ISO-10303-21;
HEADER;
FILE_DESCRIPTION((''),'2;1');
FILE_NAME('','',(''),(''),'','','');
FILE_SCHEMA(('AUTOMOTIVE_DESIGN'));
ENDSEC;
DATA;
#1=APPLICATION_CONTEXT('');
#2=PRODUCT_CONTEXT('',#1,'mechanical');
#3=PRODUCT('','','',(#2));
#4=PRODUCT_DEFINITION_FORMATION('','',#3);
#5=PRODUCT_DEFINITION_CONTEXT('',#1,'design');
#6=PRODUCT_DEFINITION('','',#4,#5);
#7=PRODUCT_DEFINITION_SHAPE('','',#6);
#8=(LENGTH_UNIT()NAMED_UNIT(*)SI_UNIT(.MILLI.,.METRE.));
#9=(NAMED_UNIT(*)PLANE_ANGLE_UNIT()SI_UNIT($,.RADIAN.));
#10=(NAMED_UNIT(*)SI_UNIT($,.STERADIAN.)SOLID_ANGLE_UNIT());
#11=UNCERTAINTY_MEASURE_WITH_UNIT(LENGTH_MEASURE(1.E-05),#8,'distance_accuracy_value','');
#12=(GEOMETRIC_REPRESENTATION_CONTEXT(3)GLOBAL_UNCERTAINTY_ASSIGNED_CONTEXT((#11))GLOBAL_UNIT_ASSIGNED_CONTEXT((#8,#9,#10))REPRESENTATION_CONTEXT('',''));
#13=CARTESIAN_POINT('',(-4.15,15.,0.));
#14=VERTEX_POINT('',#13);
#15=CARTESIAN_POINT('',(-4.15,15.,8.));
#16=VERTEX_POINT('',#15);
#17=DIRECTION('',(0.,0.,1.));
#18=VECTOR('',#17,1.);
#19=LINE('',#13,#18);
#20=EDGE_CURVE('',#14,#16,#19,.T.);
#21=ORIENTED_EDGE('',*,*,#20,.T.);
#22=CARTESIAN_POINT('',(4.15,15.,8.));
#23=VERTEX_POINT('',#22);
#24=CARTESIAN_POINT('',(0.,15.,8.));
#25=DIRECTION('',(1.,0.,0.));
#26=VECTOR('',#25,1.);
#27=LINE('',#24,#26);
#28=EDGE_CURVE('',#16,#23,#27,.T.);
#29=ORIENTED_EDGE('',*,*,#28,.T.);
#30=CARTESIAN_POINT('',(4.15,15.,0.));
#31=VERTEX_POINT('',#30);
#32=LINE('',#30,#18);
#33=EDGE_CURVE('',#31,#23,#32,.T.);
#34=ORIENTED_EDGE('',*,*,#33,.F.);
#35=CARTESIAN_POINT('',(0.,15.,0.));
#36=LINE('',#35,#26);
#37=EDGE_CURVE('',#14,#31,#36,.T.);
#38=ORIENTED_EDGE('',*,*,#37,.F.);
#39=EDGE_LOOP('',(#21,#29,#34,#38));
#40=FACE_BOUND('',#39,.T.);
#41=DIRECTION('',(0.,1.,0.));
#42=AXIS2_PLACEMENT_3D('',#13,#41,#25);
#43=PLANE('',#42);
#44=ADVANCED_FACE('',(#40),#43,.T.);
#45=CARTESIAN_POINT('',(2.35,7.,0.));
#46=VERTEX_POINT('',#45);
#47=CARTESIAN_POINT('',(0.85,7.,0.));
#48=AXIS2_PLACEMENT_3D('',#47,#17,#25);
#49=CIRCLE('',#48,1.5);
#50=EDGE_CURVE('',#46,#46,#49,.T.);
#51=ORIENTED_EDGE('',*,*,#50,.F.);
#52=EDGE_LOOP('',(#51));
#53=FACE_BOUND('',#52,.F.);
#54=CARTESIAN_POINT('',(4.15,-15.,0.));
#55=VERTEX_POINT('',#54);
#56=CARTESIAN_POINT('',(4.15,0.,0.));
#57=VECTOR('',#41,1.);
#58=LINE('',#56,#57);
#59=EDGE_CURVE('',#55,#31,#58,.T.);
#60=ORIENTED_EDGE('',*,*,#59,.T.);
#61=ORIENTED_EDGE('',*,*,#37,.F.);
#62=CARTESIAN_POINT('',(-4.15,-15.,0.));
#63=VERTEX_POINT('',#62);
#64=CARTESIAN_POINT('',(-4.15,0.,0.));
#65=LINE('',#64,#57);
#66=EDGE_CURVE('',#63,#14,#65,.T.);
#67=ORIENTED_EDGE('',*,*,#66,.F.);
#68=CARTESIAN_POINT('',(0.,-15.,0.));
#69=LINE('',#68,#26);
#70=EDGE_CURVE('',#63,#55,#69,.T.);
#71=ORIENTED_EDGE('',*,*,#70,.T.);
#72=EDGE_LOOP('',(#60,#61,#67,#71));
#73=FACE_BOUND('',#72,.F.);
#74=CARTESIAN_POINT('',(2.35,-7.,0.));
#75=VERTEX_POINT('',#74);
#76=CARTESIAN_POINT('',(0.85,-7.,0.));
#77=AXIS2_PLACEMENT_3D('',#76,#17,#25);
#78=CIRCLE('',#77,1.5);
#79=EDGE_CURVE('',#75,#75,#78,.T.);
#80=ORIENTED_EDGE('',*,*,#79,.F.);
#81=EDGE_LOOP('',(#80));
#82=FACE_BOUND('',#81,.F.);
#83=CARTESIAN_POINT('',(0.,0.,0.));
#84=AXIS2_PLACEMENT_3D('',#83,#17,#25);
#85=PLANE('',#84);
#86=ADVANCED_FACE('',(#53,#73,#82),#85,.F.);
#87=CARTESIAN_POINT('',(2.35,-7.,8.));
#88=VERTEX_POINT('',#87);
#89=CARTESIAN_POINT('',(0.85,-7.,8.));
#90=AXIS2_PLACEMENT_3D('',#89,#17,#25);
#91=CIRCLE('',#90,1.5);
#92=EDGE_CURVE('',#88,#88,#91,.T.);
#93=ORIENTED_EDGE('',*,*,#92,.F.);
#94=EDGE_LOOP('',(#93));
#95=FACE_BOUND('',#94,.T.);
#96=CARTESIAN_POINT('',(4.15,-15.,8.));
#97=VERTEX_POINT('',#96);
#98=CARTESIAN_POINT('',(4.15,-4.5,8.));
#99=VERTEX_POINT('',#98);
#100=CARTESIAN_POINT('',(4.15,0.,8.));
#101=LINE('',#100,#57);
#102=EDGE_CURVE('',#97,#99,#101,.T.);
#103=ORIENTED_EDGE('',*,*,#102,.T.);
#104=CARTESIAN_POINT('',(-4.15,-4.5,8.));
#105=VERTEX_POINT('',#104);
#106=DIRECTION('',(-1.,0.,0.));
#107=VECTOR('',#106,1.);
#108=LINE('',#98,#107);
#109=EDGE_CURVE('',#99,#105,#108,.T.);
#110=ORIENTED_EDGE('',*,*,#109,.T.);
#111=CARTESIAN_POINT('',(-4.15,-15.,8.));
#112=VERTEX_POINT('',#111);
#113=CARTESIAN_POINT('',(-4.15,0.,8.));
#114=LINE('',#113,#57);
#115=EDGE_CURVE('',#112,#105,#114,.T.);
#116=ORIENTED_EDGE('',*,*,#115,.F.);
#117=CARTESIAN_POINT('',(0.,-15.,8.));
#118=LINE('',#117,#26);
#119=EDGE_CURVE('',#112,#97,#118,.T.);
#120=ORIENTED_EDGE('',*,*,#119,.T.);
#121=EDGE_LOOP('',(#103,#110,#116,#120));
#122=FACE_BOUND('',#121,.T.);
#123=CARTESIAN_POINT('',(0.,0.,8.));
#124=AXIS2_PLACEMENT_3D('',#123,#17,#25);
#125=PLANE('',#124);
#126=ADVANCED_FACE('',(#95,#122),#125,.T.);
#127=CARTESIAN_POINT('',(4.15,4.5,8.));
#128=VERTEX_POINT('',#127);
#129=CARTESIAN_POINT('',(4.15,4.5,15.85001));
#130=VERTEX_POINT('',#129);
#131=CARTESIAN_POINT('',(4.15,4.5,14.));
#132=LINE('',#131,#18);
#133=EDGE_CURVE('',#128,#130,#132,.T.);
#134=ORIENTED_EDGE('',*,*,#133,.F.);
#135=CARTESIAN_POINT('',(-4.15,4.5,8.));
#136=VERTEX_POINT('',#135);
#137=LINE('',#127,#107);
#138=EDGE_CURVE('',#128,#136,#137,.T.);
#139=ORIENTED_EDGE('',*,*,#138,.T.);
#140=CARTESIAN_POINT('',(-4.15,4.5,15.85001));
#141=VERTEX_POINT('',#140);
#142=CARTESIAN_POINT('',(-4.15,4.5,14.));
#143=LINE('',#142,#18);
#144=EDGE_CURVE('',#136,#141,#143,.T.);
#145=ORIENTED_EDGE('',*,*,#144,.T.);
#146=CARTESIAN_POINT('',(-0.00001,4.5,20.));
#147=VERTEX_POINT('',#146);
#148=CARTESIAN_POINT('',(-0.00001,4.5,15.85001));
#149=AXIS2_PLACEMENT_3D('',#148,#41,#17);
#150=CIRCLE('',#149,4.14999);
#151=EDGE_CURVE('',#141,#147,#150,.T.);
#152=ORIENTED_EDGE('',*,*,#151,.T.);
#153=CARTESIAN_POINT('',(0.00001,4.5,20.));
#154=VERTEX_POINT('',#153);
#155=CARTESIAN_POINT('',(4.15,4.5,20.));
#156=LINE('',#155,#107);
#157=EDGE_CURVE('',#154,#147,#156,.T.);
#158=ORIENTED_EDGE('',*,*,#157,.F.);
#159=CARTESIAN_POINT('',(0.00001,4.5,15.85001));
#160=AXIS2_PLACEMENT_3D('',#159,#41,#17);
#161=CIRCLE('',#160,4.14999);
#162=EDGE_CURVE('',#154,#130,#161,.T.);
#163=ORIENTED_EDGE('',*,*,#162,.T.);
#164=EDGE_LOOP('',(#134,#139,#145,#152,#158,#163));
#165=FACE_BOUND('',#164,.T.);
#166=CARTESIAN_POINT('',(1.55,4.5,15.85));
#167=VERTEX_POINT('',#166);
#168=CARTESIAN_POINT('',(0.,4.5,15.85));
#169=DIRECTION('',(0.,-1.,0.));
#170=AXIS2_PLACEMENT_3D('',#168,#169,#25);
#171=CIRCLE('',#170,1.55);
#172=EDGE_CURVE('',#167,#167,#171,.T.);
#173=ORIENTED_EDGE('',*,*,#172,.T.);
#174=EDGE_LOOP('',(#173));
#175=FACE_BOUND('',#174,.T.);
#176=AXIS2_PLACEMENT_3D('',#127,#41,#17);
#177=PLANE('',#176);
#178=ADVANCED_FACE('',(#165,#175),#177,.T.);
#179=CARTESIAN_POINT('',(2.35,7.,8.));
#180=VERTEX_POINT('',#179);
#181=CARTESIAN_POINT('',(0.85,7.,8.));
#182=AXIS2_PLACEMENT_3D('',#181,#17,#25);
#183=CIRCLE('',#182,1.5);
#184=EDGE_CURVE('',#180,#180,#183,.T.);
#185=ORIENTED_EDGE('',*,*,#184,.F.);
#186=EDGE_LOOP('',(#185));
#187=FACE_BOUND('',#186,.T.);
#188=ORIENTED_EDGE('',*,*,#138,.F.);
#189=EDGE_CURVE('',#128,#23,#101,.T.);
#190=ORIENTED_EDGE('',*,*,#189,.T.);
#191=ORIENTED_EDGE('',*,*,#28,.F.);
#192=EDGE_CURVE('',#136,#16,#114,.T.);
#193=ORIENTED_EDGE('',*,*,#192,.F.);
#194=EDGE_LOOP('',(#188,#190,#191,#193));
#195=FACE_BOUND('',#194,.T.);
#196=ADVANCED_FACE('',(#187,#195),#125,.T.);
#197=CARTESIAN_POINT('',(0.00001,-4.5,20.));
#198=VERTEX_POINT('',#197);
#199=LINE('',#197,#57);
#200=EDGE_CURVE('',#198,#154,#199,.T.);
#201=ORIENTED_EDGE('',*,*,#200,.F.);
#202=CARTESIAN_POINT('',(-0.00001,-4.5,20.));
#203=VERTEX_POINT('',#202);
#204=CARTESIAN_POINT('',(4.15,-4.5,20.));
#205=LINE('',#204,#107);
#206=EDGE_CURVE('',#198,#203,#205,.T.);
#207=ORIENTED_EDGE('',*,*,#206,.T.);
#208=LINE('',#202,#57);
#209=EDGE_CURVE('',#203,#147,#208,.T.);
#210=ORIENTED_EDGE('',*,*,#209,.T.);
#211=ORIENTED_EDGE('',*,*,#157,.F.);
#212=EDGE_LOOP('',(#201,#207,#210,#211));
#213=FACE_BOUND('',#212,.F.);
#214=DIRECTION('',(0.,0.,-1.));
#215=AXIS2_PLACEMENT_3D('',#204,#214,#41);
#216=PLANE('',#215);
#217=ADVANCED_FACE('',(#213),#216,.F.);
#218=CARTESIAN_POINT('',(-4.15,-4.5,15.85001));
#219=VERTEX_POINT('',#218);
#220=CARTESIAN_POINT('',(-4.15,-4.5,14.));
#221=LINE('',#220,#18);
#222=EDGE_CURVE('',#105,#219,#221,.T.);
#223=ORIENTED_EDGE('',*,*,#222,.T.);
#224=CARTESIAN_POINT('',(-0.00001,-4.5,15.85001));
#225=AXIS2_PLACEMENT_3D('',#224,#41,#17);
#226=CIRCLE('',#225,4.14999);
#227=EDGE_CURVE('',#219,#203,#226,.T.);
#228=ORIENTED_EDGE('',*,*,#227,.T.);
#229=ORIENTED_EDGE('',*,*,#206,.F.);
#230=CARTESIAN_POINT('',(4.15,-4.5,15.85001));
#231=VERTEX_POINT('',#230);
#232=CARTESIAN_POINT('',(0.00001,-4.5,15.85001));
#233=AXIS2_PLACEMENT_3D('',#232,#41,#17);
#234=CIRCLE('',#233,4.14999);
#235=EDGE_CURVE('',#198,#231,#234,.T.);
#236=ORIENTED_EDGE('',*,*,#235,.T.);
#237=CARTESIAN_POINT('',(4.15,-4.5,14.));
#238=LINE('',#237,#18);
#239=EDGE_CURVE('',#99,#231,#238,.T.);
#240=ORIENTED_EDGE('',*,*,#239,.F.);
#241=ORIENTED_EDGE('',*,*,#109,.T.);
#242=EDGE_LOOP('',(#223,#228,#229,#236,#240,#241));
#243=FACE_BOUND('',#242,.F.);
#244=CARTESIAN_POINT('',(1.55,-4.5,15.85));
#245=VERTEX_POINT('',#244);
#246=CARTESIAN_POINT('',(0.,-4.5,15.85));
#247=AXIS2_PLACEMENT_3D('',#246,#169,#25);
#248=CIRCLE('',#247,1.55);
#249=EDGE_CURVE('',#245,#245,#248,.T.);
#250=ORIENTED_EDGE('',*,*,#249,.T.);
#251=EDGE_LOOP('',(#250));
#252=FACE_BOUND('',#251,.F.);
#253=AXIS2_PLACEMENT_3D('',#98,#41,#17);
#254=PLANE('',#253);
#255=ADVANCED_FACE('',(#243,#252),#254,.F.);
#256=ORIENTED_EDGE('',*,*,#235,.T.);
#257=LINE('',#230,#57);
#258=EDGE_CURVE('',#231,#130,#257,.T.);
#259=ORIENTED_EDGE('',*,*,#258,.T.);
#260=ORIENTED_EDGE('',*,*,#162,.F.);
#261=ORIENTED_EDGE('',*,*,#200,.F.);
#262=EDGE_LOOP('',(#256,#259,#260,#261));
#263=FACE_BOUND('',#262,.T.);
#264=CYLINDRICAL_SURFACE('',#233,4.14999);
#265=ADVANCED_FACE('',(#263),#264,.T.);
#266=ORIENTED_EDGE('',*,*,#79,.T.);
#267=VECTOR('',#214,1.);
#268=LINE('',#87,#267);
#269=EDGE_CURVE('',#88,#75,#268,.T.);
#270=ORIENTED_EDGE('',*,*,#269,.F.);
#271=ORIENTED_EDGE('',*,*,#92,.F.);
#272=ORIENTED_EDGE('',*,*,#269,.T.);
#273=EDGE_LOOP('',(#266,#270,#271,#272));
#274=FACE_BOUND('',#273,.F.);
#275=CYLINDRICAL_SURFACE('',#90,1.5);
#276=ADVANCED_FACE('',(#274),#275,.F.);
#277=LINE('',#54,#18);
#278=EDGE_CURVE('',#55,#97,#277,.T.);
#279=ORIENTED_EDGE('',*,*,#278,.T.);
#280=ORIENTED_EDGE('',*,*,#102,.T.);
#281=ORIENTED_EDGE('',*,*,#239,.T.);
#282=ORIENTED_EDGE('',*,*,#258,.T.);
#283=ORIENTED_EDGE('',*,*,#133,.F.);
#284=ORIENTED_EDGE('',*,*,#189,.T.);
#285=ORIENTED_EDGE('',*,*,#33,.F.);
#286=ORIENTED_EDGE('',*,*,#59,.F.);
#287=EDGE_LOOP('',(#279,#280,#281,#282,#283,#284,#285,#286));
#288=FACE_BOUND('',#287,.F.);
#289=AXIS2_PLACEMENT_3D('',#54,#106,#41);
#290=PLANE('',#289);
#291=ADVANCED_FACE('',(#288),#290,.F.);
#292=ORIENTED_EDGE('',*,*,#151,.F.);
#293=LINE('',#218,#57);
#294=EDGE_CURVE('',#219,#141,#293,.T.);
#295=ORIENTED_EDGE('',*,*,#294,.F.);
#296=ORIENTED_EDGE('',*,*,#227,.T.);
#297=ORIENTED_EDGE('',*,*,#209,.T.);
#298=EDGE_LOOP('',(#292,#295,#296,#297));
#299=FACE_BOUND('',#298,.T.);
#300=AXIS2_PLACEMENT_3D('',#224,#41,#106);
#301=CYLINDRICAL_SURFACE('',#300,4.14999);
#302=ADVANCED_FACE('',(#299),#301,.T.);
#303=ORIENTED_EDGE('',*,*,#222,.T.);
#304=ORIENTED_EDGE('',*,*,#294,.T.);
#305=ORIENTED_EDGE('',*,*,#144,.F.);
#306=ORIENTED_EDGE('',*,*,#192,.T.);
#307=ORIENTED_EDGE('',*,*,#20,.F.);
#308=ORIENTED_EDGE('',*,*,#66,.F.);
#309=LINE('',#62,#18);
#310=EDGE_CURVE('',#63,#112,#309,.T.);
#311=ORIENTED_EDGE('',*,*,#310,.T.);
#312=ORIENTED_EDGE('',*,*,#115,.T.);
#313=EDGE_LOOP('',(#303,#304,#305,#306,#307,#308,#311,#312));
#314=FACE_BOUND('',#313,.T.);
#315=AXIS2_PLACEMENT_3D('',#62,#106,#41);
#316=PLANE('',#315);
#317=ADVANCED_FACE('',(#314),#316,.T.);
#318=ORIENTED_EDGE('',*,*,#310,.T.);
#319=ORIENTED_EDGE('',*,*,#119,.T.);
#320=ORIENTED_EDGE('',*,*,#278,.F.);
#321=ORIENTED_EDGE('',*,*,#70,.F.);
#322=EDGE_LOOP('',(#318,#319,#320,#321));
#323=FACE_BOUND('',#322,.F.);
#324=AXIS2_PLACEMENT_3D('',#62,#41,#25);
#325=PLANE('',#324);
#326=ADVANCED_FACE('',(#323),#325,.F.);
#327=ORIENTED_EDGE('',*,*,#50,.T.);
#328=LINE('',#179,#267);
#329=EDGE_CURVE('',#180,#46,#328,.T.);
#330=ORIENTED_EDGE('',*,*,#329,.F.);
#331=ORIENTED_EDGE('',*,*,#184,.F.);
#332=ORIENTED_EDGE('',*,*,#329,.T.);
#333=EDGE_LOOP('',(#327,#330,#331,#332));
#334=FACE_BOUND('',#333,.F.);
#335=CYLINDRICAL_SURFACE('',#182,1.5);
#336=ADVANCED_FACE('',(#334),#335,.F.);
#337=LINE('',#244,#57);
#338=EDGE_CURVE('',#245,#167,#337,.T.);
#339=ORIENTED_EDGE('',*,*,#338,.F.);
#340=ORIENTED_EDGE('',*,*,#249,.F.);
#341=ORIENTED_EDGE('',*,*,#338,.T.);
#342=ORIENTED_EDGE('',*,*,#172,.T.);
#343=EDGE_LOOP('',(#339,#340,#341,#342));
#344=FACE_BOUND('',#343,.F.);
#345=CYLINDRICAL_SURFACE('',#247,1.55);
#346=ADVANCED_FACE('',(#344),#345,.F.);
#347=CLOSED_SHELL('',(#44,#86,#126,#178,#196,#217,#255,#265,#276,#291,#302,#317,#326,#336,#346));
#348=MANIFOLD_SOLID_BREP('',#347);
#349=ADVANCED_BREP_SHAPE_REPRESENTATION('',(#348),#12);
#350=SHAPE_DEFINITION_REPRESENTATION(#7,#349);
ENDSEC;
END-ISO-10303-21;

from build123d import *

# Parameters (mm, degrees)
F0_W     = 8.3
F0_H     = 30
F1_DEPTH = 8
F2_R     = 1.5
F3_DEPTH = 8.001
F4_W     = 9
F4_H     = 12
F5_DEPTH = 8.3
F6_R     = 1.55
F7_DEPTH = 19.501
F8_R     = 4.14999


# Not quite as in the source:
# - a fillet or chamfer is up to 0.001 mm smaller than in the source, because OpenCascade refuses the exact size


with BuildPart() as f1:
    # F0 (on Top) → F1 (new body)
    with BuildSketch(Plane.XY):
        Rectangle(F0_W, F0_H)
    extrude(amount=F1_DEPTH)

    # F2 (on face) → F3 (cut, through all)
    with BuildSketch(Plane.XY.offset(8)):
        with Locations((0.85, -7)):
            Circle(F2_R)
        with Locations((0.85, 7)):
            Circle(F2_R)
    extrude(amount=-F3_DEPTH, mode=Mode.SUBTRACT)

    # F4 (on face) → F5 (join, through all)
    with BuildSketch(Plane.YZ.offset(4.15)):
        with Locations((0, 14)):
            Rectangle(F4_W, F4_H)
    extrude(amount=-F5_DEPTH)

    # F6 (on face) → F7 (cut, through all)
    with BuildSketch(Plane.XZ.offset(4.5)):
        with Locations((0, 15.85)):
            Circle(F6_R)
    extrude(amount=-F7_DEPTH, mode=Mode.SUBTRACT)

    # F8 (radius 4.15 in the source; OpenCascade refuses exactly that, so slightly less here)
    f8_edges = [f1.edges().sort_by_distance(p)[0] for p in [
        (4.15, 0, 20),
        (-4.15, 0, 20),
    ]]
    fillet(f8_edges, radius=F8_R)


solid = f1.part
